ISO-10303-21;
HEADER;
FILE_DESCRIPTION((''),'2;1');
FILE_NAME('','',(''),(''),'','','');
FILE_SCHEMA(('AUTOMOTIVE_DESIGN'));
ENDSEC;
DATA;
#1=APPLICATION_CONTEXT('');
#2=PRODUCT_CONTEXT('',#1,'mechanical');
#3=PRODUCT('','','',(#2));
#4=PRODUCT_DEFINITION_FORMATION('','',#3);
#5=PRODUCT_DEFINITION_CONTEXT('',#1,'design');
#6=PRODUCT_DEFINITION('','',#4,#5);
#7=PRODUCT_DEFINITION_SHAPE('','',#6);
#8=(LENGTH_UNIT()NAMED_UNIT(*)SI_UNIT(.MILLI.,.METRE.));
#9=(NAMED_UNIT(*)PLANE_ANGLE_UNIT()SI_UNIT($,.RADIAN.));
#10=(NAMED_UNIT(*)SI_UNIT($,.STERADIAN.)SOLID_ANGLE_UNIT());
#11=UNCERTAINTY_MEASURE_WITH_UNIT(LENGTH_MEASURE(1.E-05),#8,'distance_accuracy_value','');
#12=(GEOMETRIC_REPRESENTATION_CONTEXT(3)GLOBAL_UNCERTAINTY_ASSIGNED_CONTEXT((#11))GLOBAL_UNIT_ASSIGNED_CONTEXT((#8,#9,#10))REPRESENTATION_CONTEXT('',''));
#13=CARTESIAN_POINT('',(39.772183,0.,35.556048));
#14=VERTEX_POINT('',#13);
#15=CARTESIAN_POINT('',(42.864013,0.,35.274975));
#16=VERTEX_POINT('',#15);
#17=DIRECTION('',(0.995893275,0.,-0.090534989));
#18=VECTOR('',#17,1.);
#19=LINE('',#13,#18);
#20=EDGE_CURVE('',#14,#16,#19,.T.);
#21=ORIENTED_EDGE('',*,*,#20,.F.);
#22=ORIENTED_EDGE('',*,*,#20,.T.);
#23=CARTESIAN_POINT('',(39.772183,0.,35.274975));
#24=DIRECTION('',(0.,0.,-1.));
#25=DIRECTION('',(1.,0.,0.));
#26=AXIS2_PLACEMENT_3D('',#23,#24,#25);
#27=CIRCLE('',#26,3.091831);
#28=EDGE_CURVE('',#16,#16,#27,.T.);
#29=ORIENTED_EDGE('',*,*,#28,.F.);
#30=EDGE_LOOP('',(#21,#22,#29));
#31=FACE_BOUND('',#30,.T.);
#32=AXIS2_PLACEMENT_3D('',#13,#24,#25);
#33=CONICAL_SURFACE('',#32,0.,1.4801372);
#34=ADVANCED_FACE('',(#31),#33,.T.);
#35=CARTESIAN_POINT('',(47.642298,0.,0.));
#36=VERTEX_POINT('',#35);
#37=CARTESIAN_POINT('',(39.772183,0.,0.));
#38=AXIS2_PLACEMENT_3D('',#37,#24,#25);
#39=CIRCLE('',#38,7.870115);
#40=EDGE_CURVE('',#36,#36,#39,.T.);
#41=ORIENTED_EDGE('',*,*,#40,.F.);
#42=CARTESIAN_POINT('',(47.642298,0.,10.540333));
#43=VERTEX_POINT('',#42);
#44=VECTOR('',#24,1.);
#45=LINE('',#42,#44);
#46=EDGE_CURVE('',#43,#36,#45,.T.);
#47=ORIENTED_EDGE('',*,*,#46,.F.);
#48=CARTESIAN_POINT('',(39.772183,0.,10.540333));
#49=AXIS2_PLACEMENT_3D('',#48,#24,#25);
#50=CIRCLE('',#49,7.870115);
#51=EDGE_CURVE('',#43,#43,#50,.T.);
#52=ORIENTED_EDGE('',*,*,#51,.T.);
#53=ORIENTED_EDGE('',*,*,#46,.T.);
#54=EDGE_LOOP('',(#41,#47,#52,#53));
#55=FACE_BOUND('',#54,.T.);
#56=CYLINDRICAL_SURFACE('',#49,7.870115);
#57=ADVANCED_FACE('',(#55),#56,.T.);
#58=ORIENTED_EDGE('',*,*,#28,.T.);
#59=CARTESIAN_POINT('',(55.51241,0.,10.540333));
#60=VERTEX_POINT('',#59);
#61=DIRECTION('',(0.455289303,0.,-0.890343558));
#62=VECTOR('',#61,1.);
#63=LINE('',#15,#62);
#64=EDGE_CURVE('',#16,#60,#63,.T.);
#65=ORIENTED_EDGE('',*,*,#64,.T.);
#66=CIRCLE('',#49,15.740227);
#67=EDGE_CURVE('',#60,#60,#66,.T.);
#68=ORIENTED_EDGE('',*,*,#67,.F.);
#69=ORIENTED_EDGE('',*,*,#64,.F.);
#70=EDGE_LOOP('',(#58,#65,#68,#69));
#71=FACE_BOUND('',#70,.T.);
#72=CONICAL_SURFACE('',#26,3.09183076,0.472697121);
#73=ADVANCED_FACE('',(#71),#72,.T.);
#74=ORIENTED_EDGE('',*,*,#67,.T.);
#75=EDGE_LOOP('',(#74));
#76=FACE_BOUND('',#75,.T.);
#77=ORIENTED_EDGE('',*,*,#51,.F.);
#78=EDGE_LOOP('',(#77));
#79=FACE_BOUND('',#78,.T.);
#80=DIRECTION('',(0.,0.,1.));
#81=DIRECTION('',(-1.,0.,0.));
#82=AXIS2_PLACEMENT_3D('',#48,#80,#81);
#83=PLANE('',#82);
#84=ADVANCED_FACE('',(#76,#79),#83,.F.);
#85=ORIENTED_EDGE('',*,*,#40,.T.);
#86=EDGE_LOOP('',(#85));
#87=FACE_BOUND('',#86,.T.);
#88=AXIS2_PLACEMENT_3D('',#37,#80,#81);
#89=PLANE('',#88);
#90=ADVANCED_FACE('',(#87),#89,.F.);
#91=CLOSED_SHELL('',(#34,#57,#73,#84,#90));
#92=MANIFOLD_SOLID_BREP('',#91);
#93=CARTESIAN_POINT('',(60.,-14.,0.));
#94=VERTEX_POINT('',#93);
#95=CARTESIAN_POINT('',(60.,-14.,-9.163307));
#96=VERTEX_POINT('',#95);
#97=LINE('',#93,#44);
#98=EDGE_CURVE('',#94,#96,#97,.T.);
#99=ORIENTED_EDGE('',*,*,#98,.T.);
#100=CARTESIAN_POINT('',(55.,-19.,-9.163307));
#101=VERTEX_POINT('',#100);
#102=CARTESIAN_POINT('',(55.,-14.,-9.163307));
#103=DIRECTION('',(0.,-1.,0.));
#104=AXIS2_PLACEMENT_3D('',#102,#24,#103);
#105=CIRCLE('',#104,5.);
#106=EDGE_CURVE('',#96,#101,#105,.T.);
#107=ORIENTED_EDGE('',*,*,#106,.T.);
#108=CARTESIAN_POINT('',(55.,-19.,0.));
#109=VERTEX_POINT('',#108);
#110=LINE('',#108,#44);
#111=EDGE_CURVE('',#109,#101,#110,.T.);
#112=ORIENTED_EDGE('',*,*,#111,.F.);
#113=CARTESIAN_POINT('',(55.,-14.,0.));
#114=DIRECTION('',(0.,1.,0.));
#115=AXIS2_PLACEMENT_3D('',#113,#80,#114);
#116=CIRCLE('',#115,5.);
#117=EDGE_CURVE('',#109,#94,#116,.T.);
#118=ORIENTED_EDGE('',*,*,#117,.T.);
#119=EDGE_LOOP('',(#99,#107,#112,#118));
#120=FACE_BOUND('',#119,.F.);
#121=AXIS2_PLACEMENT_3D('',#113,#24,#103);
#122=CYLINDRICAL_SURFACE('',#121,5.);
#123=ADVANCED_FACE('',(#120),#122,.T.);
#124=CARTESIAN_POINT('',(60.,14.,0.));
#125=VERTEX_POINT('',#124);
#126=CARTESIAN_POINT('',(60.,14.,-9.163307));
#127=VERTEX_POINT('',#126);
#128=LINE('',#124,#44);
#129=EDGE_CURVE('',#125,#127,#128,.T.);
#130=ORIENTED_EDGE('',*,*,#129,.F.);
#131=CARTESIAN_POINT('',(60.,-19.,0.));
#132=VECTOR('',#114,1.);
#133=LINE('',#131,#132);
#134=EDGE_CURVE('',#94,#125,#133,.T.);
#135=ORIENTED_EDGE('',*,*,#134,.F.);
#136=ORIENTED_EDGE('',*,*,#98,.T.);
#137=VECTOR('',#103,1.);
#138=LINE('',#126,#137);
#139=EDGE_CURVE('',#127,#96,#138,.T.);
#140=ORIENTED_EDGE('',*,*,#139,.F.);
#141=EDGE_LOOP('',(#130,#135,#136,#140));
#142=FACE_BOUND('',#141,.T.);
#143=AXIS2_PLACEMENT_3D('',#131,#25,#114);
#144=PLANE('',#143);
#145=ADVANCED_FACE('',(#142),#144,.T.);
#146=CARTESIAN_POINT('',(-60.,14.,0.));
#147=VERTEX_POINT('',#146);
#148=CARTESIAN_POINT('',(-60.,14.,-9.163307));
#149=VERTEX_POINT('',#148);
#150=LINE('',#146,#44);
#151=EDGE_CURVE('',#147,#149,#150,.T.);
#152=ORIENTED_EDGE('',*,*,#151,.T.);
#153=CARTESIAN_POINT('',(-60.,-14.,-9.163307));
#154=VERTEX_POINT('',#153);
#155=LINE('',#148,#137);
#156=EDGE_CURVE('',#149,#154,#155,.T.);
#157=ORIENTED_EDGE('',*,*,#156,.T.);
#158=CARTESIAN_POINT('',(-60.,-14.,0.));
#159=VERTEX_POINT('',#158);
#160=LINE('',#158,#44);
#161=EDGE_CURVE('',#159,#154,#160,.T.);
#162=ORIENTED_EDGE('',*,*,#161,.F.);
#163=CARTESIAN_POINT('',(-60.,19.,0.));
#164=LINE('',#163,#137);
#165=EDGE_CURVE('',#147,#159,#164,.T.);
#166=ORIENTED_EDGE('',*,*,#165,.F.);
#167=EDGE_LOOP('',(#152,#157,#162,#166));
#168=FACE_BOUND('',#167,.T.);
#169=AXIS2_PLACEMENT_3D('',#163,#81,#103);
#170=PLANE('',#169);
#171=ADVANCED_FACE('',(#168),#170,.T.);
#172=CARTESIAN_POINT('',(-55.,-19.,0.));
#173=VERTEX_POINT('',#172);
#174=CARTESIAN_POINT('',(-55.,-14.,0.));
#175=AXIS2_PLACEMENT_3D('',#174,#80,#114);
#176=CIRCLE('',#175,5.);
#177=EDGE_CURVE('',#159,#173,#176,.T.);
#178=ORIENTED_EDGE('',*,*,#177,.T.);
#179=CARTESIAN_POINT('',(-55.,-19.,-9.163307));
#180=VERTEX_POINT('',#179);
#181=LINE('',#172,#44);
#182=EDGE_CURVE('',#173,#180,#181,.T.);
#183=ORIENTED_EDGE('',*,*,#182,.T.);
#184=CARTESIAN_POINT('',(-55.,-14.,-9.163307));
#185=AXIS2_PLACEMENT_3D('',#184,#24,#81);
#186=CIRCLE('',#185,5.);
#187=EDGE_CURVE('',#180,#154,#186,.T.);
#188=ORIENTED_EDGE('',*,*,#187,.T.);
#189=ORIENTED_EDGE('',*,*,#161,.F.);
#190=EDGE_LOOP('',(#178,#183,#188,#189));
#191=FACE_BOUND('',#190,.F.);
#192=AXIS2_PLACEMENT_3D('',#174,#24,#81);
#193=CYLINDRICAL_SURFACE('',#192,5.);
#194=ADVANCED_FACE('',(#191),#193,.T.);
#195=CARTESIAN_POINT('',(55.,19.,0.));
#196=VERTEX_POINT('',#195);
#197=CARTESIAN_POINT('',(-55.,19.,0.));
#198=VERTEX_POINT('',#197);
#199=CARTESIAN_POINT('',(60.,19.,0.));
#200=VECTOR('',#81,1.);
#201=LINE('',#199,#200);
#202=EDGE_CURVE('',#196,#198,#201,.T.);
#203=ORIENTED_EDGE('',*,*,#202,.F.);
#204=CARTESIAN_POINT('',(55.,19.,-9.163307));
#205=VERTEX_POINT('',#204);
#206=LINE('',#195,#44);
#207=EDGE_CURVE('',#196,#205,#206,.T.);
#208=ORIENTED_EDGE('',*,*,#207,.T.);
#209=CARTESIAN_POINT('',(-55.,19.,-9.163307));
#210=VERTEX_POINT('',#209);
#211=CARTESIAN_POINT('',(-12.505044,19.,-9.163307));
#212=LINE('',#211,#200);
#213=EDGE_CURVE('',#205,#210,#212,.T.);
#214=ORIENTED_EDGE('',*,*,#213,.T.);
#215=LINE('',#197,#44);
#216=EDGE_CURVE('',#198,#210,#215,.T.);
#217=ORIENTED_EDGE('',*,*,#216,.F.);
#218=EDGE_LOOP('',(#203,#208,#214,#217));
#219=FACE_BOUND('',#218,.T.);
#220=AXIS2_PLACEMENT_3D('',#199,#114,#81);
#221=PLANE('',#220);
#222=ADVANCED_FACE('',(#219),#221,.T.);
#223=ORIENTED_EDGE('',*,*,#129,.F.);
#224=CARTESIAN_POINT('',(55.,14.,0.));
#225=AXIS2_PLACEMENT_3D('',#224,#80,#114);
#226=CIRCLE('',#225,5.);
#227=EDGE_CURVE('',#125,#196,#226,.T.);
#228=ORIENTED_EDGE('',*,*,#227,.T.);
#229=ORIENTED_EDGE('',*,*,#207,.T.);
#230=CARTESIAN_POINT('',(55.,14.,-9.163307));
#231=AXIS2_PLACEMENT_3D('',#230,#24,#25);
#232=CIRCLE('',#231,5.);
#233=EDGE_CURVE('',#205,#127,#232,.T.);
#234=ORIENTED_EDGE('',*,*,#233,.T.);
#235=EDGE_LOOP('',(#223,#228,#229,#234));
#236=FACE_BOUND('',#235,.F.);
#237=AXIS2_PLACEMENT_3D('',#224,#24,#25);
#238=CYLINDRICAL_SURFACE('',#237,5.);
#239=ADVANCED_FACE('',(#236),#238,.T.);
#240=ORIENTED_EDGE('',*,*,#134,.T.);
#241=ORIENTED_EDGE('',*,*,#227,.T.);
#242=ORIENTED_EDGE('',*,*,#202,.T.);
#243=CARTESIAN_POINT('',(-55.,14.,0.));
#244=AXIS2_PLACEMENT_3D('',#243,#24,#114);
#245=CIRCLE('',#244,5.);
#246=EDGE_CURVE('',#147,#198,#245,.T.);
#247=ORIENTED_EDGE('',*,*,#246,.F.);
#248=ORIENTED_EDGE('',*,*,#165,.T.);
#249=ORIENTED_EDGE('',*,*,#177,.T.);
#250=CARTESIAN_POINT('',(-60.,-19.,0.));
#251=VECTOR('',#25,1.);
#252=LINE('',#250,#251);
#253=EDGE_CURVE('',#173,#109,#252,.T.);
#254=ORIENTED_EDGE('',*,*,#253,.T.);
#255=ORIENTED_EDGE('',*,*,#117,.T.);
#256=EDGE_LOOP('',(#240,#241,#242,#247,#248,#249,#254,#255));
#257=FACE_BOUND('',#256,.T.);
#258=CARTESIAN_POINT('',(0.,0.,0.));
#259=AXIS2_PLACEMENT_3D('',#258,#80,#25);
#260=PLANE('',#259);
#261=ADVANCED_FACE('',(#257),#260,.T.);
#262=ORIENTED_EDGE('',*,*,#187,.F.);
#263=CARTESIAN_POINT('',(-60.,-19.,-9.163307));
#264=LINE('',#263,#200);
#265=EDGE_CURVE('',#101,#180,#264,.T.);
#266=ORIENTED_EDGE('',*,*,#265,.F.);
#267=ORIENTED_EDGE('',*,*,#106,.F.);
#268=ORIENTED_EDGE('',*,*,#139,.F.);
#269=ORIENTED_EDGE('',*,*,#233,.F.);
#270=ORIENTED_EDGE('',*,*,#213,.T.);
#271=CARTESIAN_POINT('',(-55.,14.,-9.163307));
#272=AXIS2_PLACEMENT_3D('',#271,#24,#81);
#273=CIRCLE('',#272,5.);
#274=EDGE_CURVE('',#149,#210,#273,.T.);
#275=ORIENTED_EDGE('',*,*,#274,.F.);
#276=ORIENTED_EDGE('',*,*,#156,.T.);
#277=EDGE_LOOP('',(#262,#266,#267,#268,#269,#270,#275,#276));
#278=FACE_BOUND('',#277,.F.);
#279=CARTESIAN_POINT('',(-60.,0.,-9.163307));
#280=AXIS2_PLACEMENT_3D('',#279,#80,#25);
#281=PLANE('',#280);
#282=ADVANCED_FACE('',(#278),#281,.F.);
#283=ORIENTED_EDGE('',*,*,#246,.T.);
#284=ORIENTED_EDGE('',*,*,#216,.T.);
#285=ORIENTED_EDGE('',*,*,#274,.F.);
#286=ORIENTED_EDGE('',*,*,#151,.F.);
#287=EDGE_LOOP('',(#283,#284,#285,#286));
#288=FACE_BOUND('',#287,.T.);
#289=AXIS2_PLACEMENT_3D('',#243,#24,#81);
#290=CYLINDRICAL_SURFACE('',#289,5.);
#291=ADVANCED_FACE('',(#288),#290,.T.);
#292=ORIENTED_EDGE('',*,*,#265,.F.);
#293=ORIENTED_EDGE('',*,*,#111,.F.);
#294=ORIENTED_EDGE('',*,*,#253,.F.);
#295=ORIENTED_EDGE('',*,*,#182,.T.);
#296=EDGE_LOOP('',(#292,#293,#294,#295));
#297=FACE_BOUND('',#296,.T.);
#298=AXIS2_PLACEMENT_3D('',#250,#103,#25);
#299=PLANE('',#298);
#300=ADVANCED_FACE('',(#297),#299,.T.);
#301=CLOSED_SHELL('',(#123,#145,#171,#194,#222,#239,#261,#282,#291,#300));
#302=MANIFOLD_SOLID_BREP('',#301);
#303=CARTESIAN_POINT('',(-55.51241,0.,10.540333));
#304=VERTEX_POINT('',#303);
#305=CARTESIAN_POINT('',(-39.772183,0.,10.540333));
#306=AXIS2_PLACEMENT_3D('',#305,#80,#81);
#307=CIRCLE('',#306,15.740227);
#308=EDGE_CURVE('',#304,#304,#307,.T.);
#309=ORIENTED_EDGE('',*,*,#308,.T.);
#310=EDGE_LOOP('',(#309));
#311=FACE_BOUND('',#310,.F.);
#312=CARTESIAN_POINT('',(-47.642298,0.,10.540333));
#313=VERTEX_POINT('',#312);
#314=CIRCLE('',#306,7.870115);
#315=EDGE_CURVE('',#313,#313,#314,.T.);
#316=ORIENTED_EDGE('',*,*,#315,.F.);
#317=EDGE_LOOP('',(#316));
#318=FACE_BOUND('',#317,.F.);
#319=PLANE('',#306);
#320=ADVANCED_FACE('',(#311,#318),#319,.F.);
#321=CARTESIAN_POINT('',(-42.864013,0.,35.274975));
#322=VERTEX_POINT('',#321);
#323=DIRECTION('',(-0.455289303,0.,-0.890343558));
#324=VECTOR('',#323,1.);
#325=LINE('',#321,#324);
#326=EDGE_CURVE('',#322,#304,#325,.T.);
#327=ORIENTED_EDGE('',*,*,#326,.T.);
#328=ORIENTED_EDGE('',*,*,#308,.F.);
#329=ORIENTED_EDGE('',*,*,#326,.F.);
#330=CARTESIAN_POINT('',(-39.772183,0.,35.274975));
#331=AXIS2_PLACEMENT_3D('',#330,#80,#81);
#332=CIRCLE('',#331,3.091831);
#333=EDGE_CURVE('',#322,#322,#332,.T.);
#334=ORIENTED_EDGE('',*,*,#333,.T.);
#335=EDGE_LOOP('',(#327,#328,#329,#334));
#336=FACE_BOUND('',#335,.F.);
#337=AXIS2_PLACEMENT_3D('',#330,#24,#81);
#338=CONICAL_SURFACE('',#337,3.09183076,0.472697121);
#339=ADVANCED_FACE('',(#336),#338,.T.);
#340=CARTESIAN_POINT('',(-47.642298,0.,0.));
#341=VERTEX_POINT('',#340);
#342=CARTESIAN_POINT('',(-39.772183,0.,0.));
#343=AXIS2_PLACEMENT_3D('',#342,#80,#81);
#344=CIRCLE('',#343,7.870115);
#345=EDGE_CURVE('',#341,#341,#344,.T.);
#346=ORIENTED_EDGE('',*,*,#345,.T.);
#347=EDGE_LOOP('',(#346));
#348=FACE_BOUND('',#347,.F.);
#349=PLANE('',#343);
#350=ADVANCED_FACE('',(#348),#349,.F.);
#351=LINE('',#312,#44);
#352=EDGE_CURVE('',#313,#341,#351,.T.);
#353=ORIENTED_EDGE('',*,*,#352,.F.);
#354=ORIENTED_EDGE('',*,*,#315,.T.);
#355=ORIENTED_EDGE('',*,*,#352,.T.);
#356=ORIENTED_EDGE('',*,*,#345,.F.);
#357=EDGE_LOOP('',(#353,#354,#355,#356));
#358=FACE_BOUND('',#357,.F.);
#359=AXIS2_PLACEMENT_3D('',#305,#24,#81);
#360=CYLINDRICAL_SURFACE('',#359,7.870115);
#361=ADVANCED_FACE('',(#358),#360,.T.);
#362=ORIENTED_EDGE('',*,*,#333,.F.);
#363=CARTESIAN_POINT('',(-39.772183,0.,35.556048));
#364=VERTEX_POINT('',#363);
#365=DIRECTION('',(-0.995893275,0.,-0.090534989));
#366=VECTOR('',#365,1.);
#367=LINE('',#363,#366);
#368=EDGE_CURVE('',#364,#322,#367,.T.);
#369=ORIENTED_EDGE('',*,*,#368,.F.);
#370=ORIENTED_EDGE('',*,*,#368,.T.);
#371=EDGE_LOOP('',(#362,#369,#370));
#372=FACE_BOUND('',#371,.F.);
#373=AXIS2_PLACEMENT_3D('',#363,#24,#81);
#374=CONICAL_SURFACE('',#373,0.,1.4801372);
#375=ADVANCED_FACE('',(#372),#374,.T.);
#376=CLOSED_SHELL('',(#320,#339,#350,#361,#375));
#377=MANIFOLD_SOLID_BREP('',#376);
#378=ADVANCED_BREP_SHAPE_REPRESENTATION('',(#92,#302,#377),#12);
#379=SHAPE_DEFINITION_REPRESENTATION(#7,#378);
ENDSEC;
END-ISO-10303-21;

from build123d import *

# Parameters (mm, degrees)
F4_DEPTH = 21
F5_R     = 5
F7_W     = 165.3024330735
F7_H     = 19.5967741311
F8_DEPTH = 19.001
F9_DEPTH = 19.001


# Not quite as in the source:
# - a feature of the source that left no trace in its solid (it failed there, or was rolled back) is left out


with BuildPart() as f1:
    # F0 (on Front) → F1 (revolve)
    with BuildSketch(Plane.XZ):
        Polygon((-47.6422980428, 10.5403326452), (-47.6422980428, 0), (-39.772182703, 0), (-39.772182703, 35.5560481548), (-42.8640134633, 35.2749750018), (-55.5124096572, 10.5403326452), align=None)
    revolve(axis=Axis((-39.772182703, 0, 14.0533037484), (0, 0, 1)))


with BuildPart() as f2_1:
    # F2: instance of F1
    add(f1.part.mirror(Plane.YZ))


with BuildPart() as f4:
    # F3 (on Top) → F4 (new body)
    with BuildSketch(Plane.XY):
        Polygon((-60, 19), (-60, 0), (-60, -19), (60, -19), (60, 19), align=None)
    extrude(amount=-F4_DEPTH)

    # F5
    f5_edges = [f4.edges().sort_by_distance(p)[0] for p in [
        (60, -19, -10.5),
        (-60, -19, -10.5),
        (60, 19, -10.5),
        (-60, 19, -10.5),
    ]]
    fillet(f5_edges, radius=F5_R)

    # F7 (on Front) → F8 (cut, through all)
    with BuildSketch(Plane.XZ):
        with Locations((-2.3588724434, -18.9616940916)):
            Rectangle(F7_W, F7_H)
    extrude(amount=-F8_DEPTH, mode=Mode.SUBTRACT)

    # F9 (cut, through all): a face of the model
    f9_faces = [f4.faces().sort_by_distance(p)[0] for p in [
        (0, 0, -15.081653513),
    ]]
    extrude(f9_faces, amount=-F9_DEPTH, mode=Mode.SUBTRACT)


solid = Compound([f1.part, f2_1.part, f4.part])
